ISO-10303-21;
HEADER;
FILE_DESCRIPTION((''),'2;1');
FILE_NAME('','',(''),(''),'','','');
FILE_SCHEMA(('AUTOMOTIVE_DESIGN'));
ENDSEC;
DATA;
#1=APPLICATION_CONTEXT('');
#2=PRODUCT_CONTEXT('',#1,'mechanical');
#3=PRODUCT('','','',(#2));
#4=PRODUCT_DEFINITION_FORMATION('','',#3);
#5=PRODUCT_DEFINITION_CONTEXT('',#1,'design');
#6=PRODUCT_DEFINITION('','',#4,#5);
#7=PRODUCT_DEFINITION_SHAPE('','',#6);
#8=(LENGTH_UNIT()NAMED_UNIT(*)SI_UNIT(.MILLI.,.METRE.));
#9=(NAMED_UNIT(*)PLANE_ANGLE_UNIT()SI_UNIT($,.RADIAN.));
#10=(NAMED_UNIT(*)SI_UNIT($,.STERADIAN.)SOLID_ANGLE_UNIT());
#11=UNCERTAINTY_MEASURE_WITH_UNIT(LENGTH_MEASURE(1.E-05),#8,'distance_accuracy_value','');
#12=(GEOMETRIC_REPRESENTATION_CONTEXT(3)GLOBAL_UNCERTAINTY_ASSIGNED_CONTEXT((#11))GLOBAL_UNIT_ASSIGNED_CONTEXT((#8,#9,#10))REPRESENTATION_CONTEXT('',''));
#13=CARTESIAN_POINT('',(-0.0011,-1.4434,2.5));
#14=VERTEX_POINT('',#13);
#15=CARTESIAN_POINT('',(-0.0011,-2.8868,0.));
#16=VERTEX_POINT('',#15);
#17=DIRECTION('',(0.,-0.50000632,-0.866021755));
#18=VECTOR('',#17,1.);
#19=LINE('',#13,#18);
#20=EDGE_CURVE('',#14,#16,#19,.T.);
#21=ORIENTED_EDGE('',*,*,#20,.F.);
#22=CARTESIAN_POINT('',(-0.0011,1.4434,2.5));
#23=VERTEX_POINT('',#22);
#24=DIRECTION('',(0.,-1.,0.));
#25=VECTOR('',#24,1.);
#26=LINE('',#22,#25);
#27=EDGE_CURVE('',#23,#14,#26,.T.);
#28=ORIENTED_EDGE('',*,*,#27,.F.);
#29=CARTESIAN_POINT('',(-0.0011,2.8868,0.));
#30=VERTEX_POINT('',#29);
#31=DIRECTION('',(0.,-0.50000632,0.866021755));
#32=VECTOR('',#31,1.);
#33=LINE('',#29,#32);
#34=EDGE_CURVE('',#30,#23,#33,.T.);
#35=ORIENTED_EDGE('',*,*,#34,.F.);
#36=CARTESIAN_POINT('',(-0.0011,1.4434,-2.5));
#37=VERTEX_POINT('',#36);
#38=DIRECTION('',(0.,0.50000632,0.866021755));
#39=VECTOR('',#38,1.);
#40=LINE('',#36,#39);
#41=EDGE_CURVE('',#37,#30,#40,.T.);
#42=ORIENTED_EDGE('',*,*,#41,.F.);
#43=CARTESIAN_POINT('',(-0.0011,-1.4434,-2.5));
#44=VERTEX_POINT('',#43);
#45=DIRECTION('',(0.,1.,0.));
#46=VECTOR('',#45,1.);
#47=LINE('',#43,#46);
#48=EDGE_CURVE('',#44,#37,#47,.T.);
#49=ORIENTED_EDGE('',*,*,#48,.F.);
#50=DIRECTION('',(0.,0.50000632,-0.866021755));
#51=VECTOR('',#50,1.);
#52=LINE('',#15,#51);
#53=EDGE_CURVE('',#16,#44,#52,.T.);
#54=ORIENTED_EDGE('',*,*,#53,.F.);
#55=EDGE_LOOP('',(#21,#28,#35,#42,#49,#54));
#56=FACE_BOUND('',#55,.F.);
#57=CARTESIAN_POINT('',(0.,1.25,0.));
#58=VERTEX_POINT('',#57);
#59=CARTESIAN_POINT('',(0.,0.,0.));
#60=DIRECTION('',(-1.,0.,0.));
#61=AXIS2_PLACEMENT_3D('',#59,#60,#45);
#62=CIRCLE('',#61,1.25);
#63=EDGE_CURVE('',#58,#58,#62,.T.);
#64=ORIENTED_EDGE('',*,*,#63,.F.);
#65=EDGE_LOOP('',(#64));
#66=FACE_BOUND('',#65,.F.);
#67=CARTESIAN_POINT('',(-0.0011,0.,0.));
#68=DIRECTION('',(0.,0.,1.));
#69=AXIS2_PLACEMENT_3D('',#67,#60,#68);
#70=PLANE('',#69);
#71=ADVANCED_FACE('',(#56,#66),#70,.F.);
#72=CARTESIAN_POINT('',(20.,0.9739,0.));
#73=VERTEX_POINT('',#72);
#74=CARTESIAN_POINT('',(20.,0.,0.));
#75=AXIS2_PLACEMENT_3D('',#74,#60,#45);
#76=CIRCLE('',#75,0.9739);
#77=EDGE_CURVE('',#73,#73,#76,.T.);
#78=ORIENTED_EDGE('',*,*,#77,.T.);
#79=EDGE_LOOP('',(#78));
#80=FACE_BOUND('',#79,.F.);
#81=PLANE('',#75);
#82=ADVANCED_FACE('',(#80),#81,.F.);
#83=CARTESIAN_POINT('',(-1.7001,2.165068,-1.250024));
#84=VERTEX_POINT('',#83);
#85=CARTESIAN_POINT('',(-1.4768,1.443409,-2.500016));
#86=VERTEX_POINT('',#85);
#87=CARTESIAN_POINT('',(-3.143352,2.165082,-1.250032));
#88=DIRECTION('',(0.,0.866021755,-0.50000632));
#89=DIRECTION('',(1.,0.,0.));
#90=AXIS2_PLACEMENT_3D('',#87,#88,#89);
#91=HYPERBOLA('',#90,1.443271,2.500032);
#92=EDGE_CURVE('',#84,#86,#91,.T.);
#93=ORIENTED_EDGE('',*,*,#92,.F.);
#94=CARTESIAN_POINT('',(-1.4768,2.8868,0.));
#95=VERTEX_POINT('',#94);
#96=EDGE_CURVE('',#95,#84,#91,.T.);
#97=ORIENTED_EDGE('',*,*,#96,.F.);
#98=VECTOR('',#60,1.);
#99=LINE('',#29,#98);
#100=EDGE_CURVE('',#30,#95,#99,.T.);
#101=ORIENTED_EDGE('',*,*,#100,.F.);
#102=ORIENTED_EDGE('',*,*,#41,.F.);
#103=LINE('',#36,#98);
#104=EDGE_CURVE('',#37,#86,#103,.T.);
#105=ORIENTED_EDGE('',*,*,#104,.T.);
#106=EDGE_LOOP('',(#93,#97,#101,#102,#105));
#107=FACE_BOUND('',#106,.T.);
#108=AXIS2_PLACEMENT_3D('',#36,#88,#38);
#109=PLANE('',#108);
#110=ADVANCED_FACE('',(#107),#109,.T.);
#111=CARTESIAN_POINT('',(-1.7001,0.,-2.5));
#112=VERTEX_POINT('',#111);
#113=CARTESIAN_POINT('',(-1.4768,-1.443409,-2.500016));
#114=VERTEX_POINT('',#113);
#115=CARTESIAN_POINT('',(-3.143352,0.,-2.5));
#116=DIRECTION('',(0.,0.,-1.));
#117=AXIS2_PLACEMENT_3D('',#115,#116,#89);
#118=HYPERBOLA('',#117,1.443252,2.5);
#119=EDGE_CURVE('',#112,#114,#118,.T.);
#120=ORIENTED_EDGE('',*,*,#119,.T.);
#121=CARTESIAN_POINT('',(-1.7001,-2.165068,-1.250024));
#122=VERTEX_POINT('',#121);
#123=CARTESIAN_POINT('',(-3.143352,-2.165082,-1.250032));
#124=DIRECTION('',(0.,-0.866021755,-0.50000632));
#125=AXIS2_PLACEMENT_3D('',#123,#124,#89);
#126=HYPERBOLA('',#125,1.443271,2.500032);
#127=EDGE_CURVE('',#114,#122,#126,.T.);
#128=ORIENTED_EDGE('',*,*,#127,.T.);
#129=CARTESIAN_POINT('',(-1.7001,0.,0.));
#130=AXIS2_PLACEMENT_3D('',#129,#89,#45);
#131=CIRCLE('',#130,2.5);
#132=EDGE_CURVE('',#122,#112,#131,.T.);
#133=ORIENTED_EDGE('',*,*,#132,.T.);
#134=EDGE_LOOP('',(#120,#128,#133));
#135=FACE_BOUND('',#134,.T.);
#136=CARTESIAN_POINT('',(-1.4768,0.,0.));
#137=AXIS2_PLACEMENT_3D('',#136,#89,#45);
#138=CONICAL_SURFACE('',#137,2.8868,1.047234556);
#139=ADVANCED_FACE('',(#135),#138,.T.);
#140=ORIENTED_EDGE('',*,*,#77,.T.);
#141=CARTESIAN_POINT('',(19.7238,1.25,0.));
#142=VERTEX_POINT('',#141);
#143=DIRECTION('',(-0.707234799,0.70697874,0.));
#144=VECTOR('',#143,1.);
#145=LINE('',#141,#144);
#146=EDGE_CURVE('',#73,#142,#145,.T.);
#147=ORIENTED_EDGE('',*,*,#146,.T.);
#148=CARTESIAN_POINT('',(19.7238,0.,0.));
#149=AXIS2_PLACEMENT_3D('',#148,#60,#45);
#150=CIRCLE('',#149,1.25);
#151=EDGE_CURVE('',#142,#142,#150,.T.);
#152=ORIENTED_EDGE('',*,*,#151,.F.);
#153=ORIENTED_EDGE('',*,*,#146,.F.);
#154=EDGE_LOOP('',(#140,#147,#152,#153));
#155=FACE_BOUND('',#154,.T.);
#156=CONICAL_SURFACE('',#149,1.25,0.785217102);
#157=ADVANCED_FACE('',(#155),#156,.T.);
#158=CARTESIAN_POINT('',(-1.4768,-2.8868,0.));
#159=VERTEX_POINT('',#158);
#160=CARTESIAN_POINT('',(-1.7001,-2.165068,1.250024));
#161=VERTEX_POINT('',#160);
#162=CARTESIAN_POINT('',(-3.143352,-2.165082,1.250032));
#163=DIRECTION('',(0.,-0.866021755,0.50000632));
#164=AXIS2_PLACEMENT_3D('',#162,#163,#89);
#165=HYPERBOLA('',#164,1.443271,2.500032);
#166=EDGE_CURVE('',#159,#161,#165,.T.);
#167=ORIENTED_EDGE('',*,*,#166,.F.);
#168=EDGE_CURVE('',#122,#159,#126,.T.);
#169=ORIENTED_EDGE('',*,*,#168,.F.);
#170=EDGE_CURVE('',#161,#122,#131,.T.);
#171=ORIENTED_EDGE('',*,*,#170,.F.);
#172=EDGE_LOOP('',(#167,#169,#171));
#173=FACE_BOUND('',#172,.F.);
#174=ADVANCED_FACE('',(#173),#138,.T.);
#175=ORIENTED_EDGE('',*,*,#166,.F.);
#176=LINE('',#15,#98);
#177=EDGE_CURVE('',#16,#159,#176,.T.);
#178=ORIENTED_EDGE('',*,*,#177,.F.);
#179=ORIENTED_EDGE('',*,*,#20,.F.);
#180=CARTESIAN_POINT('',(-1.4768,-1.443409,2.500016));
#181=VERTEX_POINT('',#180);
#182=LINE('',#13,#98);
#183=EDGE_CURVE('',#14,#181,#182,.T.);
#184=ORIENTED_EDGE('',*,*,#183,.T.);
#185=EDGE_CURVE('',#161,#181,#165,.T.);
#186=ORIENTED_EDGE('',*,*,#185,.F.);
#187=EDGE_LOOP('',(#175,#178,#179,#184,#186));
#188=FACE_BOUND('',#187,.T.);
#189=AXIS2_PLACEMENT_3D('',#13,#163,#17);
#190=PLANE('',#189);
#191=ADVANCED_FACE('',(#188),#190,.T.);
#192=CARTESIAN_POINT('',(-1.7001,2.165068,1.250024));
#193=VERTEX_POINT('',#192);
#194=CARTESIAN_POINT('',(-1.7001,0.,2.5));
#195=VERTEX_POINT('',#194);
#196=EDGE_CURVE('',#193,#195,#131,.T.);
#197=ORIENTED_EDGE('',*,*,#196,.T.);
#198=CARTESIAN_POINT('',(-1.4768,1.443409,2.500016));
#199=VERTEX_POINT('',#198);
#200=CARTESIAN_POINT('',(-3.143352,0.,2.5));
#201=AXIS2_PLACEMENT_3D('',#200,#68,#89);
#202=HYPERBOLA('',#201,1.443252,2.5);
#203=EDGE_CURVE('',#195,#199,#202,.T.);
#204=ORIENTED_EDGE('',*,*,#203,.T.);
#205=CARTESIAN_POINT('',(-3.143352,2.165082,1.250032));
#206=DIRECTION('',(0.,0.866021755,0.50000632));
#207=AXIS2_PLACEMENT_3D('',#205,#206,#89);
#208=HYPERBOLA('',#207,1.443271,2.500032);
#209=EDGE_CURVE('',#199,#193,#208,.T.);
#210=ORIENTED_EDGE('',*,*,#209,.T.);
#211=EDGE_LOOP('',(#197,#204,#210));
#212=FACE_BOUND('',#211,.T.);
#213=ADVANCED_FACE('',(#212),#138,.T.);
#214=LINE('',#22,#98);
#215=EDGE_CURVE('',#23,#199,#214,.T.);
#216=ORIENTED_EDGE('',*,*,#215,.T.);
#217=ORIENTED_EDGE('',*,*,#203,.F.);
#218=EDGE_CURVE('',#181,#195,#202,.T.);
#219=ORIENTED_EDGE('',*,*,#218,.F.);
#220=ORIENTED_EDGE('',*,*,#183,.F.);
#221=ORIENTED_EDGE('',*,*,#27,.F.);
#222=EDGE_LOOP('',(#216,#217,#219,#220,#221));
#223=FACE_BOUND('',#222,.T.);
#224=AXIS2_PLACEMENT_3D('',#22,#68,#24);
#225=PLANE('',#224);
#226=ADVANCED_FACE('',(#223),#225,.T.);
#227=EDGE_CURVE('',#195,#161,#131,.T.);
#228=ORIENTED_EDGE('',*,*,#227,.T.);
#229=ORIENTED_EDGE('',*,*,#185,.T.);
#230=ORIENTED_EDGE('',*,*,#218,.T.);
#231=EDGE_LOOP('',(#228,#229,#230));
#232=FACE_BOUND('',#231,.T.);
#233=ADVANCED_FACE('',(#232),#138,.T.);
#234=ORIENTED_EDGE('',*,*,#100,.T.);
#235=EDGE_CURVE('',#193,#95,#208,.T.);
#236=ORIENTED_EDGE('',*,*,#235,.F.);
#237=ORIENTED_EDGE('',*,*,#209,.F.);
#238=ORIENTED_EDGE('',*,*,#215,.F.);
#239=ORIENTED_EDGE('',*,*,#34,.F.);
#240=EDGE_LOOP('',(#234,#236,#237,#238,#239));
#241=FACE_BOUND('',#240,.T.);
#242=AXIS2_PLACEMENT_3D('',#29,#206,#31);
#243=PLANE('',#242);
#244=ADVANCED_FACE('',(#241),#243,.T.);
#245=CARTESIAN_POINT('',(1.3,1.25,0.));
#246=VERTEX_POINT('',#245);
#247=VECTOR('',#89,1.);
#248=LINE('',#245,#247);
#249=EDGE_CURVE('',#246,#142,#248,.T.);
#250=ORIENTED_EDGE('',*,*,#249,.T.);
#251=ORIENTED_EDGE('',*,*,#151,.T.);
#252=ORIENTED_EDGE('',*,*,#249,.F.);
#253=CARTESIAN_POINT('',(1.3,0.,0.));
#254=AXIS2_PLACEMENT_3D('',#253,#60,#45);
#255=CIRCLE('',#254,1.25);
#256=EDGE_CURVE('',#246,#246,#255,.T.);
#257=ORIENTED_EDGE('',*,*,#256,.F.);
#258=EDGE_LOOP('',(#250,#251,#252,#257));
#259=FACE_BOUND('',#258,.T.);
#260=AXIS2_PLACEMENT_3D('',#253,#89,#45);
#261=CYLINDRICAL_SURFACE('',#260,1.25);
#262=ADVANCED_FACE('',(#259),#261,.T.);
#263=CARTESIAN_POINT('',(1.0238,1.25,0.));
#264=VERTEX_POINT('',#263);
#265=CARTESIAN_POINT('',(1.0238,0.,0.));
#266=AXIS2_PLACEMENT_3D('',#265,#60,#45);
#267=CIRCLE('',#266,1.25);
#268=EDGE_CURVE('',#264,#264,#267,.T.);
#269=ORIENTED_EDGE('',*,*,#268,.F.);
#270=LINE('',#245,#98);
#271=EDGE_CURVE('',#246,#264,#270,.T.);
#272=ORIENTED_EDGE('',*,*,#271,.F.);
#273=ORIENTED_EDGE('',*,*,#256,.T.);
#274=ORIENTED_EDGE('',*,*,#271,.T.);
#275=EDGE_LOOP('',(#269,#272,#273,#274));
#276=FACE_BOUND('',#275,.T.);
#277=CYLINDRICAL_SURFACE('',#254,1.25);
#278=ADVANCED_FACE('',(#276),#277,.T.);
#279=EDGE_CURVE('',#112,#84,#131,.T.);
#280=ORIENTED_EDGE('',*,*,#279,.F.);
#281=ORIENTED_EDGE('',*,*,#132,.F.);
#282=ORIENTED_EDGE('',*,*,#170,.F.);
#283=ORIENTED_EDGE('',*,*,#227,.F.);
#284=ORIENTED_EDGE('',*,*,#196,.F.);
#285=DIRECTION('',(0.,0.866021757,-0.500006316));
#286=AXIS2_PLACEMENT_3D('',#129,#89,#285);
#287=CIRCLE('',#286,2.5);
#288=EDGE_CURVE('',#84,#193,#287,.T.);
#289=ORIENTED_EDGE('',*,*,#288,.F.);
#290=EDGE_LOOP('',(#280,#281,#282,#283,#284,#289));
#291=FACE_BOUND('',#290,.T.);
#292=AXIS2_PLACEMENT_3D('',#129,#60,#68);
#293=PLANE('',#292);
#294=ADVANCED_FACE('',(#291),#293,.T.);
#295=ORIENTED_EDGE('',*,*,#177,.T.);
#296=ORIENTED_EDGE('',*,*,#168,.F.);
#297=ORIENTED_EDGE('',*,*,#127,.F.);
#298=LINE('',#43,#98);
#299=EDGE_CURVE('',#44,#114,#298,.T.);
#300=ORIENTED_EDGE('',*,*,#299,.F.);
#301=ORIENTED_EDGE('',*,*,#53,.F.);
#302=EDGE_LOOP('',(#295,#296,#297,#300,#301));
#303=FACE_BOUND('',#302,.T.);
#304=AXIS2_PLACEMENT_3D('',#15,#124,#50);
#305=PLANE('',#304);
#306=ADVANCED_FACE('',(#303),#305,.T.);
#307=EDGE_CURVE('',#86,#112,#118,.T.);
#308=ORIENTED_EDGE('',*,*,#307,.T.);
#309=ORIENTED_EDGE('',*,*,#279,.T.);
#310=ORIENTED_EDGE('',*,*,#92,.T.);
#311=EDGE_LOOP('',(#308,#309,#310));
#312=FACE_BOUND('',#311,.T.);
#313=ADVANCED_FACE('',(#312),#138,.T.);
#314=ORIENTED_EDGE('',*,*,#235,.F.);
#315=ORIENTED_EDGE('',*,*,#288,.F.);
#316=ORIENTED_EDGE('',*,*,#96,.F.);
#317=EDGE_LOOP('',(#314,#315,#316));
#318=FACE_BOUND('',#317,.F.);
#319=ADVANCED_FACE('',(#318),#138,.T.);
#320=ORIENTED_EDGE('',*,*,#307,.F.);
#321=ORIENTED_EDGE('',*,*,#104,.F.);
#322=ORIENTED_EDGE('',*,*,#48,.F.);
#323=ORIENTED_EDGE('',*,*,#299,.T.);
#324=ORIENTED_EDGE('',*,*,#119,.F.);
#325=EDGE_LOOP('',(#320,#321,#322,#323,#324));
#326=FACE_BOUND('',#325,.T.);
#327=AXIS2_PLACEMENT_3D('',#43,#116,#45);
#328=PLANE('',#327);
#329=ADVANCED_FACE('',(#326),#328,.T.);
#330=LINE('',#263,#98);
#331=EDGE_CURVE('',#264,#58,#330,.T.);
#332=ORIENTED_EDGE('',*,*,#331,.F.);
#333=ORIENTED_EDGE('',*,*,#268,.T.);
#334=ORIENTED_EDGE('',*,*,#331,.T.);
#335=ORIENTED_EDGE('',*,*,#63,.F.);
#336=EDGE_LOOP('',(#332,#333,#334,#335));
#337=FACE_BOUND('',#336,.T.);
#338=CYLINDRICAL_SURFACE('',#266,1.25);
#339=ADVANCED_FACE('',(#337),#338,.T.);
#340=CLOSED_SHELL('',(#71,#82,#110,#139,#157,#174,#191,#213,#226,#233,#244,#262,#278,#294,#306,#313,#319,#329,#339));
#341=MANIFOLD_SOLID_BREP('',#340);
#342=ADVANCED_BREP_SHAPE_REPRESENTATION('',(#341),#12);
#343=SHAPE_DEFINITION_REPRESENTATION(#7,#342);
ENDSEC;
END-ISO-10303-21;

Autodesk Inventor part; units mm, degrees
ref_plane "YZ Plane" through (0, 0, 0) normal (1, 0, 0) x (0, 1, 0)
ref_plane "XZ Plane" through (0, 0, 0) normal (0, 1, 0) x (-1, 0, 0)
sketch "Boceto1" plane through (0, 0, 0) normal (0, 0, 1) x (1, 0, 0)
  line L0 (0, 2.5) -> (0, 1.25)
  line L1 (1.3, 1.25) -> (20, 1.25)
  line L2 (20, 1.25) -> (20, 0)
  line L3 (20, 0) -> (-0.0011, 0)
  line L4 (-4.0013, 0) -> (24.0002, 0) projected
  line L5 (-0.0011, 0) -> (-0.0011, 2.5)
  line L6 (-0.0011, 2.5) -> (0, 2.5)
  line L7 (1.3, 1.25) -> (1.0238, 1.25)
  line L8 (1.0238, 1.25) -> (0, 1.25)
  line L9 (0, -0.5) -> (0, 3) projected
  dimension "d0" = 20
  dimension "d1" = 18.7
  dimension "d2" = 2.5
  dimension "d9" = 0.0011
  dimension "d10" = 5
  dimension "d13" = 0.2762
  dimension "d14" = 2.5
revolve "Cuerpo" add sketch "Boceto1" angle 360 about axis through (20, 0, 0) along (-1, 0, 0)
sketch "Boceto2" plane through (-0.0011, 0, 0) normal (-1, 0, 0) x (0, 0, 1)
  line L0 (0, 2.8868) -> (2.5, 1.4434)
  line L1 (2.5, 1.4434) -> (2.5, -1.4434)
  line L2 (2.5, -1.4434) -> (0, -2.8868)
  line L3 (0, -2.8868) -> (-2.5, -1.4434)
  line L4 (-2.5, -1.4434) -> (-2.5, 1.4434)
  line L5 (-2.5, 1.4434) -> (0, 2.8868)
  point P0 (0, 0)
  point P1 (0, 0)
  dimension "d11" = 5
extrude "Cabeza" add sketch "Boceto2" along normal blind 1.699
sketch "Boceto4" plane through (0, 0, 0) normal (0, 0, 1) x (1, 0, 0)
  line L0 (-1.7001, 2.5) -> (-1.7001, 2.8868)
  line L1 (-1.7001, 2.8868) -> (-1.4768, 2.8868)
  line L2 (-1.4768, 2.8868) -> (-1.7001, 2.5)
  line L3 (-2.0399, 0) -> (0.3387, 0) projected
  line L4 (-0.0011, 2.8868) -> (-1.7001, 2.8868) projected
  line L5 (-1.7001, 1.4434) -> (-1.7001, 2.8868) projected
  dimension "d5" = 30
  dimension "d19" = 5
revolve "Chaflán1" cut sketch "Boceto4" angle 360 about axis through (-10, 0, 0) along (1, 0, 0)
thread "Rosca" size "M2.5x0.45" class "6g" standard "ISO Metric profile" length 18.7
chamfer "Chaflán2" distance 0.2761 distance2 0.2762 1 edges at (20, -1.25, 0) measured on face at (20, -0.025, 0.4802)
ref_plane "Work Plane1" through (1.525, 0, 0) normal (0, 0, 1) x (1, 0, 0)
equation "\"d0\" = NLG"
equation "\"d1\" = GEL"
equation "\"d2\" = GD"
equation "\"d10\" = SD2"
equation "\"d14\" = BDM"
equation "\"d11\" = SW"
equation "\"d3\" = KOH - SD"
equation "\"d5\" = ANG1"
equation "\"d19\" = SW0"
equation "\"d15\" = GEL"
equation "\"d6\" = -0.5 * SPD + 0.5 * GD"
equation "\"NLG\" = 20"
equation "\"GD\" = NND"
equation "\"BDM\" = NND"
equation "\"KOH\" = 1.7"
equation "\"GEL\" = 18.7"
equation "\"SW\" = 5"
equation "\"SW0\" = SW"
equation "\"SPD\" = NND - 1.2269 * PTC"
equation "\"SD2\" = SW"
equation "\"SD\" = 0.001"
equation "\"ANG1\" = 30deg"
equation "\"GAL\" = 0.61345 * PTC"
equation "\"GUL\" = 0.61345 * PTC"
equation "\"RR\" = 0.001"
equation "\"WFT\" = SD"
equation "\"GD1\" = THREADDIA - 1.2269 * PTC"
equation "\"THREADDIA\" = 2.5"
equation "\"SDH\" = SW"
equation "\"TOA\" = 30deg"
equation "\"FAWI\" = 45deg"
equation "\"PTC\" = 0.45"
equation "\"NND\" = 2.5"
equation "\"E0\" = 1.155 * SW"
properties part number "AS 1110 - M2,5 x 20" material "Acero, suave"
